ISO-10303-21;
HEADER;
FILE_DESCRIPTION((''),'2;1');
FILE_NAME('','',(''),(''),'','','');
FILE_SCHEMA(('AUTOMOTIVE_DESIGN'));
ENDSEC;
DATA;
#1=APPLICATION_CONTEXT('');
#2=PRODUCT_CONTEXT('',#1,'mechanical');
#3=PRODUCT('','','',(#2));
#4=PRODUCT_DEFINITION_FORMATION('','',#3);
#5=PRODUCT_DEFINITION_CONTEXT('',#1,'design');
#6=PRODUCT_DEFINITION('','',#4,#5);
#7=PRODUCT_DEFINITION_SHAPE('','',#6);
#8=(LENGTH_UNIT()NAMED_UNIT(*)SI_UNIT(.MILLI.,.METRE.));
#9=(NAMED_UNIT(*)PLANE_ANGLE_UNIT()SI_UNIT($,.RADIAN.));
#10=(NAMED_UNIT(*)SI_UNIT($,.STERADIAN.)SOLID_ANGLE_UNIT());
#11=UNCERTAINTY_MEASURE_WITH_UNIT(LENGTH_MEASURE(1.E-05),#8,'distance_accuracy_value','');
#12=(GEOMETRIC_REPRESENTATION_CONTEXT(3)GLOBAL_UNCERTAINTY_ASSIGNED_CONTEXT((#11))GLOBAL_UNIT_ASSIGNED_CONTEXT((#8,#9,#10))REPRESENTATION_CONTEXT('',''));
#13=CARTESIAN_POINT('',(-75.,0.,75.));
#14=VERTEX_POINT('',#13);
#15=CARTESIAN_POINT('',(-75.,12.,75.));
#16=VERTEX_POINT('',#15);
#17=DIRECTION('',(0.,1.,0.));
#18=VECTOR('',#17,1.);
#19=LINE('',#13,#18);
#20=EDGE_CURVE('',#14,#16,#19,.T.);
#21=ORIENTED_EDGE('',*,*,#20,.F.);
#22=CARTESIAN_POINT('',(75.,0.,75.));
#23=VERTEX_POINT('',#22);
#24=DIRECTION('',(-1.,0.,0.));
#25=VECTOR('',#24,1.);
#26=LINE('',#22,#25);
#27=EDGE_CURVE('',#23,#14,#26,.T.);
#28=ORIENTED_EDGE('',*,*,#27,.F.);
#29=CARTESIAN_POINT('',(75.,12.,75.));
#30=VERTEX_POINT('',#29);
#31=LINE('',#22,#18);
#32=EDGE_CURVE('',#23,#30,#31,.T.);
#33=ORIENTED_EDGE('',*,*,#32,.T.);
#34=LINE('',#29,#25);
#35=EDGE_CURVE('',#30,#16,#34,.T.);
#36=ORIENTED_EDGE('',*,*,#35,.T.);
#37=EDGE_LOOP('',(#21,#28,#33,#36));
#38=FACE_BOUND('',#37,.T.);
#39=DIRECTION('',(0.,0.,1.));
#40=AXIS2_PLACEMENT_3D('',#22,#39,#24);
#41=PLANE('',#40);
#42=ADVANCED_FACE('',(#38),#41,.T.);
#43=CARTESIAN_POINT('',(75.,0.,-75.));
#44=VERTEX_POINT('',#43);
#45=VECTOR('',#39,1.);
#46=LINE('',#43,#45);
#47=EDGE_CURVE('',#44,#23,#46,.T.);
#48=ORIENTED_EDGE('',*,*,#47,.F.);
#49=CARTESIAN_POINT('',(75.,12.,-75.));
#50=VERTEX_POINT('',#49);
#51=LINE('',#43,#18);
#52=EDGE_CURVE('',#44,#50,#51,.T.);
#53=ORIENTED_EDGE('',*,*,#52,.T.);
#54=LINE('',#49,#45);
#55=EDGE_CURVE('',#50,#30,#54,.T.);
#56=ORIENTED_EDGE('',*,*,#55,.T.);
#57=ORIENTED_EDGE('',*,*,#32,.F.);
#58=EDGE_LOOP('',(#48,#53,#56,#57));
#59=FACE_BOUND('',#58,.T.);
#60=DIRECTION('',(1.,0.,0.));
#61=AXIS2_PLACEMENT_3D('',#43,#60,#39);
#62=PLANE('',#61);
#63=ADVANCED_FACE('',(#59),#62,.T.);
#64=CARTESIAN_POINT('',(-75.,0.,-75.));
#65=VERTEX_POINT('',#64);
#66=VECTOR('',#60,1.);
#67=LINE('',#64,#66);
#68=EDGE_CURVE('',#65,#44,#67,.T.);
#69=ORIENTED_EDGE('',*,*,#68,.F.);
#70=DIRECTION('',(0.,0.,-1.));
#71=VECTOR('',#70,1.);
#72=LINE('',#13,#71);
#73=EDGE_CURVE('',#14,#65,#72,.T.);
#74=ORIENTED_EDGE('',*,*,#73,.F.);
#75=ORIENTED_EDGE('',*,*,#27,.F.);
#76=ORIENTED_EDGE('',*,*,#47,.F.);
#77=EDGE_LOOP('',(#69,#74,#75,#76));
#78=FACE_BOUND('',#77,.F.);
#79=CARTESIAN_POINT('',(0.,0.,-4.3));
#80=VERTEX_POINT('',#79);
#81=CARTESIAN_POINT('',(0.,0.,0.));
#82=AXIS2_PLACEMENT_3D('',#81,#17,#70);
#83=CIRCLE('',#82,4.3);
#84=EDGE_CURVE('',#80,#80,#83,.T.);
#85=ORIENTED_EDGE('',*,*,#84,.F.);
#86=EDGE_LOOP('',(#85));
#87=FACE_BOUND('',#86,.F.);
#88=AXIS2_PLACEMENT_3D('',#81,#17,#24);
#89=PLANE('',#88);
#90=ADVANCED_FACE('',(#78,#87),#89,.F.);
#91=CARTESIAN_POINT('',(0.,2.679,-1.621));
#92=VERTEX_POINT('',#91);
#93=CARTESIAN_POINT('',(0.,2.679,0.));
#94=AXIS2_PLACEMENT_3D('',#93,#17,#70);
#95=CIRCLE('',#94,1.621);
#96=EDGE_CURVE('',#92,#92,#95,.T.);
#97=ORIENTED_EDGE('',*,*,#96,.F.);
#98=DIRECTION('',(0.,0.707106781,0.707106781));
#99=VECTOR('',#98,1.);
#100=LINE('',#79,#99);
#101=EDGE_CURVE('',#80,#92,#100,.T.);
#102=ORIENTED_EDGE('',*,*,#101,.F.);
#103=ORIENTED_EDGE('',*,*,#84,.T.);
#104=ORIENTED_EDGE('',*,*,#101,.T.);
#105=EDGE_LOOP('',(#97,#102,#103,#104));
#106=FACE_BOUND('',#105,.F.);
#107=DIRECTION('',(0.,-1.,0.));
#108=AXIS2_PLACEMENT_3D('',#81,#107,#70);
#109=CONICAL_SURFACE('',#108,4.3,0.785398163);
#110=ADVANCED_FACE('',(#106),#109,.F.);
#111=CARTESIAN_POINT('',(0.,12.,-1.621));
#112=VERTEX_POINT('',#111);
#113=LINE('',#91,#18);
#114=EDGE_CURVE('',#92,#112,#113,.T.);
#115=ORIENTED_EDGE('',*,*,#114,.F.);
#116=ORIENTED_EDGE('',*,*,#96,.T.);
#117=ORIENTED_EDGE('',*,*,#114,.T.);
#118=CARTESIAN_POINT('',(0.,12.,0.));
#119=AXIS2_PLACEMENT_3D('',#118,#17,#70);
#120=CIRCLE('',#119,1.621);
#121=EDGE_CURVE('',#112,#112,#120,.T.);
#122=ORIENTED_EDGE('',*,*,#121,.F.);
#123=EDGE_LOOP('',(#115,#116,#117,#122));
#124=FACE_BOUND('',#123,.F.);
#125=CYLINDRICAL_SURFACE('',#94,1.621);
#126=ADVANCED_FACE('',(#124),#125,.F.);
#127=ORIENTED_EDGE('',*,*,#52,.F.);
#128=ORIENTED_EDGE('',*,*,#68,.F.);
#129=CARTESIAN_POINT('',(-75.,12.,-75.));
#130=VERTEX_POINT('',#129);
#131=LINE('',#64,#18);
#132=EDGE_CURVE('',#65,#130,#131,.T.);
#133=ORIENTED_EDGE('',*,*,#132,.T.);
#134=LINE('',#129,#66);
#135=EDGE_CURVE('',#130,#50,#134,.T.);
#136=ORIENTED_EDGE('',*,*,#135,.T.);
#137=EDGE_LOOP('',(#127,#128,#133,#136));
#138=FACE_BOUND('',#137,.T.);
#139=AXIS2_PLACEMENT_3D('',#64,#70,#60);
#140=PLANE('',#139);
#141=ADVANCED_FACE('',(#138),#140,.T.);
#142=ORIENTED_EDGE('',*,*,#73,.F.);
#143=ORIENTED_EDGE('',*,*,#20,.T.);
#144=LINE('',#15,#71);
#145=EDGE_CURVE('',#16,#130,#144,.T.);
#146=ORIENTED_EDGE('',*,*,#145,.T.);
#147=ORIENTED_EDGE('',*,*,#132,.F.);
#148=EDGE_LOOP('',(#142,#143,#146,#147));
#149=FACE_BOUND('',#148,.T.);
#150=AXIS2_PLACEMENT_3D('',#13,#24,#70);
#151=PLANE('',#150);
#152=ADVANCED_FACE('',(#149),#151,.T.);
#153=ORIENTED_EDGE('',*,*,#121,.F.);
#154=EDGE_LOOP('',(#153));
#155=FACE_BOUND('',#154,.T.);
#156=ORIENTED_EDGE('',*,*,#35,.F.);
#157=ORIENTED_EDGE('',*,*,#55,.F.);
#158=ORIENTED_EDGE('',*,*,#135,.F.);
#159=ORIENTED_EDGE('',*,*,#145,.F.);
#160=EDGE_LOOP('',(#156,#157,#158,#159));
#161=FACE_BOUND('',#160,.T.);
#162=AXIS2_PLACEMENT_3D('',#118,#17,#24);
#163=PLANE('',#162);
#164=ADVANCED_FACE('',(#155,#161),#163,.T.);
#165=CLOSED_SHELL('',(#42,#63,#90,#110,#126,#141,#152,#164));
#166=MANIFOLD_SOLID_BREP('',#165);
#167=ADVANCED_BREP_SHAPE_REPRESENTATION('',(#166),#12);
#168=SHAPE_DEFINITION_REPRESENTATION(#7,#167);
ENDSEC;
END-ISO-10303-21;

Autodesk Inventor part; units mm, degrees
ref_plane "YZ Plane" through (0, 0, 0) normal (1, 0, 0) x (0, 1, 0)
ref_plane "XZ Plane" through (0, 0, 0) normal (0, 1, 0) x (-1, 0, 0)
ref_plane "XY Plane" through (0, 0, 0) normal (0, 0, 1) x (1, 0, 0)
sketch "Sketch1" plane through (0, 0, 0) normal (0, 1, 0) x (-1, 0, 0)
  line L0 (75, -75) -> (-75, -75)
  line L1 (-75, -75) -> (-75, 75)
  line L2 (-75, 75) -> (75, 75)
  line L3 (75, 75) -> (75, -75)
  point P0 (0, 0)
  point P1 (75, 0)
  point P2 (0, -75)
  dimension "d0" = 150
  dimension "d1" = 150
extrude "Extrusion1" add sketch "Sketch1" along normal blind 12
sketch "Sketch2" plane through (0, 0, 0) normal (0, -1, 0) x (1, 0, 0)
  point P0 (0, 0)
  point P1 (0, 0)
hole "Hole1" at (0, 0, 0) direction (0, 1, 0) diameter 3.242 end through all countersink diameter 8.6 countersink angle 90 thread size "M4x0.7" class "6H" standard "ISO Metric profile"
properties part number "Camera_base_plate"
